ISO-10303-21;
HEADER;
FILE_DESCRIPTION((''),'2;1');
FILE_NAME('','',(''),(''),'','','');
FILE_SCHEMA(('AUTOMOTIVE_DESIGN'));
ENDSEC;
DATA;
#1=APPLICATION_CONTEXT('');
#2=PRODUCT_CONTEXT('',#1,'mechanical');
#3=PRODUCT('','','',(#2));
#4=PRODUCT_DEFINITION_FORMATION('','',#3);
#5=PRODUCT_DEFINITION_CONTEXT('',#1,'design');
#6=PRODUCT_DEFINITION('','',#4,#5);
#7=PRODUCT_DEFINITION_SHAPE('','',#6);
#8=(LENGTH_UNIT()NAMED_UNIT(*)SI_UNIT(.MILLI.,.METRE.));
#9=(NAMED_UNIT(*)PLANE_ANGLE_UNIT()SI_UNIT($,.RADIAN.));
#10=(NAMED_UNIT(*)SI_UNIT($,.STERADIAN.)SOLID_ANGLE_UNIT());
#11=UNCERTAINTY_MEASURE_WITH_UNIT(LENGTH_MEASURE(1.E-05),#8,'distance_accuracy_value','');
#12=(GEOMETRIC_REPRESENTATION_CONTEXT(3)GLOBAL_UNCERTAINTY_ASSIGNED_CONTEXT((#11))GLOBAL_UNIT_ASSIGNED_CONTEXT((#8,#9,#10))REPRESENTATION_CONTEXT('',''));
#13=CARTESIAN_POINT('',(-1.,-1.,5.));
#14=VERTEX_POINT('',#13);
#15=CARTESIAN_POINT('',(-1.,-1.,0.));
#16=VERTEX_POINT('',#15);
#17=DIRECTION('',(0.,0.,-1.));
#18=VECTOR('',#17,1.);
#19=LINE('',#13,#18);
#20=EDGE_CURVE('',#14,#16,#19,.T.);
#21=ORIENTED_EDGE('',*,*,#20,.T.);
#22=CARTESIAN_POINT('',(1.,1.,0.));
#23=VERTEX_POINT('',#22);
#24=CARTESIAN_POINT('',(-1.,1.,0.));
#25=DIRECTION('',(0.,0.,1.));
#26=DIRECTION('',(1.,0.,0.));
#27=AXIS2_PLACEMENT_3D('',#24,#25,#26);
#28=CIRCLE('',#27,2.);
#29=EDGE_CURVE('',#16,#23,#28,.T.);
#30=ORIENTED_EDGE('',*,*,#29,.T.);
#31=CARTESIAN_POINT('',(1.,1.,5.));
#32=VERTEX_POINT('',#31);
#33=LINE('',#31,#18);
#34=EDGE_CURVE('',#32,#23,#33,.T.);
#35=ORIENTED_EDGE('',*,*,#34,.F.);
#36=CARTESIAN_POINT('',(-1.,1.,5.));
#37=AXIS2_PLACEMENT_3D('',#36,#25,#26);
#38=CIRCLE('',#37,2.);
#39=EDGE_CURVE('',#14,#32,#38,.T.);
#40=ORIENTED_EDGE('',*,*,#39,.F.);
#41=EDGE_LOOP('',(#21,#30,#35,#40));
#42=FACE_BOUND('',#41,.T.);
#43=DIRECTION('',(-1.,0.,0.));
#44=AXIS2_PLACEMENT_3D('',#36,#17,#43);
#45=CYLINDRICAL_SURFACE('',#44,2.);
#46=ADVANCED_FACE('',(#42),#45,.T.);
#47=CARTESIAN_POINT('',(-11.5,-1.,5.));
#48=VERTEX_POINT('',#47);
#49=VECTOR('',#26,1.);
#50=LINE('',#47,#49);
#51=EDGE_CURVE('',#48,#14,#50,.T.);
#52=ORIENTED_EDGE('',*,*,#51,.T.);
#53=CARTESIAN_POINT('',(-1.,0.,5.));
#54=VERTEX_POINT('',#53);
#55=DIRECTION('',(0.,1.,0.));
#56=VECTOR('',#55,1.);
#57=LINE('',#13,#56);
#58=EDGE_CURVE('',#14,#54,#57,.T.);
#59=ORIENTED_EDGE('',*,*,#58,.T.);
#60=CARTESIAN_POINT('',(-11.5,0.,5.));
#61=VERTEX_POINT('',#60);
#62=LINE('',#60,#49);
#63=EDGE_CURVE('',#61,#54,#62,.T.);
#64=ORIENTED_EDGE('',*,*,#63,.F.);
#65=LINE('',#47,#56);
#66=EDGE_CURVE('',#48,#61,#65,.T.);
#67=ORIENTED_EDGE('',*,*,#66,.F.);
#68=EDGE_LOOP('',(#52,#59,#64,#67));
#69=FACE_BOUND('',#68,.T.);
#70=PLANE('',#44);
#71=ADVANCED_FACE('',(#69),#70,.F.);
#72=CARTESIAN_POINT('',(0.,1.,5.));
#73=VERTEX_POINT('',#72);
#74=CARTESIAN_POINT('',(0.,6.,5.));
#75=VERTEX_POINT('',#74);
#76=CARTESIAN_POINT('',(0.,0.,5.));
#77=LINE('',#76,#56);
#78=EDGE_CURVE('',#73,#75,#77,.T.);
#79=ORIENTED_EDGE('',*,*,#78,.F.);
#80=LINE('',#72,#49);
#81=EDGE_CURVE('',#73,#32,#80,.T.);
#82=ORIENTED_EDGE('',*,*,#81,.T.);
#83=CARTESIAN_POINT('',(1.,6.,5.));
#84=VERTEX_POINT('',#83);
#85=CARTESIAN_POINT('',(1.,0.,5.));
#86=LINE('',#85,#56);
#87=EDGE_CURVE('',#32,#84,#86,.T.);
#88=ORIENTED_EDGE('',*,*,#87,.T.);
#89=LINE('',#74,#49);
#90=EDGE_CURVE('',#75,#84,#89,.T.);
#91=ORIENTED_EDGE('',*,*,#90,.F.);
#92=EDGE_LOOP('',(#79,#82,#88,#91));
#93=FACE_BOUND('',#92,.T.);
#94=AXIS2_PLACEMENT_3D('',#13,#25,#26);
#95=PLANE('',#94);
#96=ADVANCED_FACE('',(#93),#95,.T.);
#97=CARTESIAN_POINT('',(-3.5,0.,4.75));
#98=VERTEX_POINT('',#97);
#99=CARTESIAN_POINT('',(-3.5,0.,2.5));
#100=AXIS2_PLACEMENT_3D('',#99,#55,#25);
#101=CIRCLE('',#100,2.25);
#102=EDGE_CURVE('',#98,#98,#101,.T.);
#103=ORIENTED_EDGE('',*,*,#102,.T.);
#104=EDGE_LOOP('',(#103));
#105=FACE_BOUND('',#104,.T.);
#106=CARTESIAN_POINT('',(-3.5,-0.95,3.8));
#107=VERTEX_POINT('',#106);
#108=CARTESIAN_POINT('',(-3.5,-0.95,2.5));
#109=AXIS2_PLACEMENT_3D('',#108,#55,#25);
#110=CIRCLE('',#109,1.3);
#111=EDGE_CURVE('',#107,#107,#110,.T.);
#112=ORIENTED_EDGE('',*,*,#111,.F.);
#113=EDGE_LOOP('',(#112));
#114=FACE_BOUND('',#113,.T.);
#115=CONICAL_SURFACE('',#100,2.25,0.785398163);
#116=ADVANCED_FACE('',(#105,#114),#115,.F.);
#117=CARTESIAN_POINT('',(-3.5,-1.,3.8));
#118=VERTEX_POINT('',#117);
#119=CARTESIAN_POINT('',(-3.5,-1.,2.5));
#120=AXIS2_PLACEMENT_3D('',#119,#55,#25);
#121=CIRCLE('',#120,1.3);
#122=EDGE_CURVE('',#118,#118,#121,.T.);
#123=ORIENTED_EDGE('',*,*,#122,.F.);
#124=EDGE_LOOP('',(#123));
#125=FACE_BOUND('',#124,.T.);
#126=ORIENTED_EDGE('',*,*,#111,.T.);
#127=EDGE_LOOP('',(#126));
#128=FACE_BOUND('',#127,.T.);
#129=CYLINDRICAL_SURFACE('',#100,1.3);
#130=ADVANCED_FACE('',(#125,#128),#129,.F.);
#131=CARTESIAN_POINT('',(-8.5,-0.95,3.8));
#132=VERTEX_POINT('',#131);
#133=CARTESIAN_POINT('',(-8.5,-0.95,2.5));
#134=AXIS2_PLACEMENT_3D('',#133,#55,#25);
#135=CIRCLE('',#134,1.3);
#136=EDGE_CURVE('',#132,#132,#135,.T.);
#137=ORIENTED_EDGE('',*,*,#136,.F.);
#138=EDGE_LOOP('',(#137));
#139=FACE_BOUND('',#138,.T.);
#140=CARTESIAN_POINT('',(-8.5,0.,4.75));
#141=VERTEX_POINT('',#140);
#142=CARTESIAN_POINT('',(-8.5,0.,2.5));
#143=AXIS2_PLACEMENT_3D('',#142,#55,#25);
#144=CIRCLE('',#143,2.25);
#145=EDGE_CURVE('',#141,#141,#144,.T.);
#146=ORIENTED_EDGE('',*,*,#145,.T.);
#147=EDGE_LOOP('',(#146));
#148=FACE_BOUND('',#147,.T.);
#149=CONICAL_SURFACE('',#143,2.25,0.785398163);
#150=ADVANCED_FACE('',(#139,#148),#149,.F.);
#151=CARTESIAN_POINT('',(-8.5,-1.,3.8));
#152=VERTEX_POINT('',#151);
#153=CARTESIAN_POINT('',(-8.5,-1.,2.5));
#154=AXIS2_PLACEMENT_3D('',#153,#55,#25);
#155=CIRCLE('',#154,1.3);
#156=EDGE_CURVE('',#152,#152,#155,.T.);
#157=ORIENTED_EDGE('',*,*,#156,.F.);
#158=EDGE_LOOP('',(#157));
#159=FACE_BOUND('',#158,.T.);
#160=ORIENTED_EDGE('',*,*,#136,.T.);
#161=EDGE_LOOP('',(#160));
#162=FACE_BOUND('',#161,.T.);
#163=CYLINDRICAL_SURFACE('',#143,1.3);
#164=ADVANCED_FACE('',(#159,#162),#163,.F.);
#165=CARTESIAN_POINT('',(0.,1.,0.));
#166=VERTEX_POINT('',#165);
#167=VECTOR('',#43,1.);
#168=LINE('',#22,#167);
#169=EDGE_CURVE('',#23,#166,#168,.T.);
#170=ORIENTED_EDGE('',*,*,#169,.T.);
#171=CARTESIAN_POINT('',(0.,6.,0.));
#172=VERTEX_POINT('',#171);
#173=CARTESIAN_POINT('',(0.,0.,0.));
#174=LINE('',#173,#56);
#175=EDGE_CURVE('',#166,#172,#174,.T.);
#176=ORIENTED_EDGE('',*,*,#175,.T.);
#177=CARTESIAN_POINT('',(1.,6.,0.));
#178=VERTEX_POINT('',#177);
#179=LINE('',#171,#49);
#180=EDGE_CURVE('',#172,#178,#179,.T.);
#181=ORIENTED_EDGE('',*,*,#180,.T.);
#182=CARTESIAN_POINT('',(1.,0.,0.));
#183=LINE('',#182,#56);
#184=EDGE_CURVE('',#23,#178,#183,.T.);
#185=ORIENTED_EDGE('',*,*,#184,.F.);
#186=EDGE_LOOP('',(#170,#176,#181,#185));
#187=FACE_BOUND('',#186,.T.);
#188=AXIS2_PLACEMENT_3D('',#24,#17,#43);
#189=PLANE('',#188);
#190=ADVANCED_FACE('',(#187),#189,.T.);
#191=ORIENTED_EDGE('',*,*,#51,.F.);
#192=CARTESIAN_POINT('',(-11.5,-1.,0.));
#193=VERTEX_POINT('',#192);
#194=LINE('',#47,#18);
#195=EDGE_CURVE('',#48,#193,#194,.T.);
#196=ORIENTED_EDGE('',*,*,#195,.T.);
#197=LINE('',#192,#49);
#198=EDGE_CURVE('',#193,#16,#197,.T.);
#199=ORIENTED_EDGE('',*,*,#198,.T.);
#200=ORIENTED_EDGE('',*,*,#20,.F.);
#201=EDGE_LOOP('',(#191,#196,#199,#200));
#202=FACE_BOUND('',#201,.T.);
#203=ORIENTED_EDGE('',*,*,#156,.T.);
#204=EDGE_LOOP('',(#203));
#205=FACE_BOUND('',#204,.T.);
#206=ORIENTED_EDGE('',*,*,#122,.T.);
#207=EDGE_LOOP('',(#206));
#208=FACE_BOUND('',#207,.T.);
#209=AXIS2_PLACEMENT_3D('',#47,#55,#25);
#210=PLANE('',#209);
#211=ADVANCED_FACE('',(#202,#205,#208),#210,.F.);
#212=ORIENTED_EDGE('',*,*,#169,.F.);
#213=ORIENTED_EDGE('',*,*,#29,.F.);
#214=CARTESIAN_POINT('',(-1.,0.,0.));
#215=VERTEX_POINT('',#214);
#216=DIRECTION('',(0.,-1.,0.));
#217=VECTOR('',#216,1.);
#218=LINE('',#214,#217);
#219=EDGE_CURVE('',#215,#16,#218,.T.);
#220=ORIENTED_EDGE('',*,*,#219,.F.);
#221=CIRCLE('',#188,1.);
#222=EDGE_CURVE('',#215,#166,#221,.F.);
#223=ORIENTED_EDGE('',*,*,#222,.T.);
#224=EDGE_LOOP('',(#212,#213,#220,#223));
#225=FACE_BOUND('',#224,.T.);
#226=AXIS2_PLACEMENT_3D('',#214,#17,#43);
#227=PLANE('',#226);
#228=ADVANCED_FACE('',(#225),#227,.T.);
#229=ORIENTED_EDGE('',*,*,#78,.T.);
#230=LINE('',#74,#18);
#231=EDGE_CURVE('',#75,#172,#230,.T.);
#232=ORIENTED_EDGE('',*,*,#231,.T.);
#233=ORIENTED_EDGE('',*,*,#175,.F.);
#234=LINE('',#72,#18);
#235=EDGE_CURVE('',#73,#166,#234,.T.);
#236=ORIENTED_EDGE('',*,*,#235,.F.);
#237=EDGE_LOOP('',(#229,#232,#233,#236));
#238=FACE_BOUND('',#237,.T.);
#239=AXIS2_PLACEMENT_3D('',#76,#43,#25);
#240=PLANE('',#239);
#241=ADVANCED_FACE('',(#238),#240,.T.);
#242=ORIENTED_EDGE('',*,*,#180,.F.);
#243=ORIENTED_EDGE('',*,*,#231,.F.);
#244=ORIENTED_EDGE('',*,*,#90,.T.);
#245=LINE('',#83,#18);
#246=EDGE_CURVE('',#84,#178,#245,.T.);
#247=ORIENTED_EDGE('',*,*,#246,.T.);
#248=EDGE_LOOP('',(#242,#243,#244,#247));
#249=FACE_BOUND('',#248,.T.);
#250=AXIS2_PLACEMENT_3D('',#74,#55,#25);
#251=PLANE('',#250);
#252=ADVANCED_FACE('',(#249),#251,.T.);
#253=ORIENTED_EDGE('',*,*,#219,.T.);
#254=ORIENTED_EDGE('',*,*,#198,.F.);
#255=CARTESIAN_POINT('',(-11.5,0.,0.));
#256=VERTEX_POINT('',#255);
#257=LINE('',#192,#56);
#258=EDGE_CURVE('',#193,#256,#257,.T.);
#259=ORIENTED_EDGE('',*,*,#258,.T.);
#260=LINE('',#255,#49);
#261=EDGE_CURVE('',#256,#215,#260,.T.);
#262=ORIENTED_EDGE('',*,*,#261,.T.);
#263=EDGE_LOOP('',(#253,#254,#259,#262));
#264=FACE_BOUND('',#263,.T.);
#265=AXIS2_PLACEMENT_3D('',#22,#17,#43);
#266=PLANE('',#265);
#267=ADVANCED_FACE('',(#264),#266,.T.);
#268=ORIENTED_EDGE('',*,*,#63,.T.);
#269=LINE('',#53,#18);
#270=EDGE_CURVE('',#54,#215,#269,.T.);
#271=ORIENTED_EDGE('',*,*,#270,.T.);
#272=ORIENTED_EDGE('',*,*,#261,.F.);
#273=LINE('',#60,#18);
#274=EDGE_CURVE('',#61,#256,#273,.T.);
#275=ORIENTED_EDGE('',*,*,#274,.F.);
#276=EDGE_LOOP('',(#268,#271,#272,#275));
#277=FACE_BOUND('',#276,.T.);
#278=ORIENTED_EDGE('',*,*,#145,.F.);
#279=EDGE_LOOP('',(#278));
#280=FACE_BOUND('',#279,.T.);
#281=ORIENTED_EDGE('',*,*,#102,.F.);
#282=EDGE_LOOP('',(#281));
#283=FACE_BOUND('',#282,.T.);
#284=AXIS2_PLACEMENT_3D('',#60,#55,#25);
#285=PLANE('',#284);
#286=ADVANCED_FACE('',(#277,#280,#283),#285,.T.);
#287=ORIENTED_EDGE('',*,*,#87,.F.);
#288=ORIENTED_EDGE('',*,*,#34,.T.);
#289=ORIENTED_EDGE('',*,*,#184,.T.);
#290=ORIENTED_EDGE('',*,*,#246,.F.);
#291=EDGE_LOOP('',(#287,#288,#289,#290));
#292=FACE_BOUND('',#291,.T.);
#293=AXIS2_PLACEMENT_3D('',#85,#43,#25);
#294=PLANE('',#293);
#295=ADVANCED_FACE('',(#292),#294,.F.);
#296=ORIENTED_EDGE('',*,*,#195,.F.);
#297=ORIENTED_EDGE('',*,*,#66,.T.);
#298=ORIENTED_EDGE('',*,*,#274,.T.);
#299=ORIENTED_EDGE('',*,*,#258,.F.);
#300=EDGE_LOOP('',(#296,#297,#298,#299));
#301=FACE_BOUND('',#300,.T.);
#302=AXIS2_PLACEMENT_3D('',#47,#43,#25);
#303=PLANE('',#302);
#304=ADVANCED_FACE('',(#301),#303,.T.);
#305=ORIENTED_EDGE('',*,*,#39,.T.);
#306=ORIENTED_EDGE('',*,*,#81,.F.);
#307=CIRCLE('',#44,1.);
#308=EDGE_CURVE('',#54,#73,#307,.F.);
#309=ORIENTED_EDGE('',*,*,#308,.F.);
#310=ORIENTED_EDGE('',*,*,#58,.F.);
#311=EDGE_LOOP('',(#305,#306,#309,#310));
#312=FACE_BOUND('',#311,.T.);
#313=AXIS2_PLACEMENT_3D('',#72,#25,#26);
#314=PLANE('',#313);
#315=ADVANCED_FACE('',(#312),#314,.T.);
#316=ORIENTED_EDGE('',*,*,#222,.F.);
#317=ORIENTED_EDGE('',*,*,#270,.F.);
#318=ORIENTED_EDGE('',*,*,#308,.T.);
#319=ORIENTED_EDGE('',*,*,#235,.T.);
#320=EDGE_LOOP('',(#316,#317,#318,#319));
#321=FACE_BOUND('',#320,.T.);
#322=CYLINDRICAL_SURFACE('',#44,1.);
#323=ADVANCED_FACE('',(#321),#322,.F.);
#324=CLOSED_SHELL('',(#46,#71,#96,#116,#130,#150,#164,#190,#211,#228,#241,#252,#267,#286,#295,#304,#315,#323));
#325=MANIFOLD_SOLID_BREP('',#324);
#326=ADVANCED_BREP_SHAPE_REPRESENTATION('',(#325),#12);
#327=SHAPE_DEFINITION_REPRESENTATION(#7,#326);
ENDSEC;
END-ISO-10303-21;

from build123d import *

# Parameters (mm, degrees)
BASE_FLANGE1_DEPTH                          = 5
CSK_FOR_M2_CROSS_RECESSED_CTSK_HEAD_2_COUNT = 2
CSK_FOR_M2_CROSS_RECESSED_CTSK_HEAD_2_PITCH = 5


# Sheet-metal steps are written as plain solids
with BuildPart() as part:
    # Sketch1 → Base-Flange1 (new body)
    with BuildSketch(Plane.XY):
        with BuildLine():
            Line((-11.5, 0), (-1, 0))
            ThreePointArc((-1, 0), (-0.292893219, 0.292893219), (0, 1))
            Line((0, 1), (0, 6))
            Line((0, 6), (1, 6))
            Line((1, 6), (1, 1))
            ThreePointArc((1, 1), (0.414213562, -0.414213562), (-1, -1))
            Line((-1, -1), (-11.5, -1))
            Line((-11.5, -1), (-11.5, 0))
        make_face()
    extrude(amount=BASE_FLANGE1_DEPTH)

    # Sketch3 → CSK for M2 Cross recessed CTSK head wood screws1 (revolve, cut)
    with BuildSketch(Plane(origin=(-8.5, 0, 2.5), x_dir=(0, 0, 1), z_dir=(1, 0, 0))):
        Polygon((0, 0), (0, 1), (1.3, 1), (1.3, 0.95), (2.25, 0), align=None)
    csk_for_m2_cross_recessed_ctsk_head_wood = revolve(axis=Axis((-8.5, 6.35, 2.5), (0, -1, 0)), mode=Mode.SUBTRACT)

    # CSK for M2 Cross recessed CTSK head  2: CSK for M2 Cross recessed CTSK head wood screws1 ×2
    with Locations(*[(i * CSK_FOR_M2_CROSS_RECESSED_CTSK_HEAD_2_PITCH, 0, 0) for i in range(1, CSK_FOR_M2_CROSS_RECESSED_CTSK_HEAD_2_COUNT)]):
        add(csk_for_m2_cross_recessed_ctsk_head_wood, mode=Mode.SUBTRACT)


solid = part.part
